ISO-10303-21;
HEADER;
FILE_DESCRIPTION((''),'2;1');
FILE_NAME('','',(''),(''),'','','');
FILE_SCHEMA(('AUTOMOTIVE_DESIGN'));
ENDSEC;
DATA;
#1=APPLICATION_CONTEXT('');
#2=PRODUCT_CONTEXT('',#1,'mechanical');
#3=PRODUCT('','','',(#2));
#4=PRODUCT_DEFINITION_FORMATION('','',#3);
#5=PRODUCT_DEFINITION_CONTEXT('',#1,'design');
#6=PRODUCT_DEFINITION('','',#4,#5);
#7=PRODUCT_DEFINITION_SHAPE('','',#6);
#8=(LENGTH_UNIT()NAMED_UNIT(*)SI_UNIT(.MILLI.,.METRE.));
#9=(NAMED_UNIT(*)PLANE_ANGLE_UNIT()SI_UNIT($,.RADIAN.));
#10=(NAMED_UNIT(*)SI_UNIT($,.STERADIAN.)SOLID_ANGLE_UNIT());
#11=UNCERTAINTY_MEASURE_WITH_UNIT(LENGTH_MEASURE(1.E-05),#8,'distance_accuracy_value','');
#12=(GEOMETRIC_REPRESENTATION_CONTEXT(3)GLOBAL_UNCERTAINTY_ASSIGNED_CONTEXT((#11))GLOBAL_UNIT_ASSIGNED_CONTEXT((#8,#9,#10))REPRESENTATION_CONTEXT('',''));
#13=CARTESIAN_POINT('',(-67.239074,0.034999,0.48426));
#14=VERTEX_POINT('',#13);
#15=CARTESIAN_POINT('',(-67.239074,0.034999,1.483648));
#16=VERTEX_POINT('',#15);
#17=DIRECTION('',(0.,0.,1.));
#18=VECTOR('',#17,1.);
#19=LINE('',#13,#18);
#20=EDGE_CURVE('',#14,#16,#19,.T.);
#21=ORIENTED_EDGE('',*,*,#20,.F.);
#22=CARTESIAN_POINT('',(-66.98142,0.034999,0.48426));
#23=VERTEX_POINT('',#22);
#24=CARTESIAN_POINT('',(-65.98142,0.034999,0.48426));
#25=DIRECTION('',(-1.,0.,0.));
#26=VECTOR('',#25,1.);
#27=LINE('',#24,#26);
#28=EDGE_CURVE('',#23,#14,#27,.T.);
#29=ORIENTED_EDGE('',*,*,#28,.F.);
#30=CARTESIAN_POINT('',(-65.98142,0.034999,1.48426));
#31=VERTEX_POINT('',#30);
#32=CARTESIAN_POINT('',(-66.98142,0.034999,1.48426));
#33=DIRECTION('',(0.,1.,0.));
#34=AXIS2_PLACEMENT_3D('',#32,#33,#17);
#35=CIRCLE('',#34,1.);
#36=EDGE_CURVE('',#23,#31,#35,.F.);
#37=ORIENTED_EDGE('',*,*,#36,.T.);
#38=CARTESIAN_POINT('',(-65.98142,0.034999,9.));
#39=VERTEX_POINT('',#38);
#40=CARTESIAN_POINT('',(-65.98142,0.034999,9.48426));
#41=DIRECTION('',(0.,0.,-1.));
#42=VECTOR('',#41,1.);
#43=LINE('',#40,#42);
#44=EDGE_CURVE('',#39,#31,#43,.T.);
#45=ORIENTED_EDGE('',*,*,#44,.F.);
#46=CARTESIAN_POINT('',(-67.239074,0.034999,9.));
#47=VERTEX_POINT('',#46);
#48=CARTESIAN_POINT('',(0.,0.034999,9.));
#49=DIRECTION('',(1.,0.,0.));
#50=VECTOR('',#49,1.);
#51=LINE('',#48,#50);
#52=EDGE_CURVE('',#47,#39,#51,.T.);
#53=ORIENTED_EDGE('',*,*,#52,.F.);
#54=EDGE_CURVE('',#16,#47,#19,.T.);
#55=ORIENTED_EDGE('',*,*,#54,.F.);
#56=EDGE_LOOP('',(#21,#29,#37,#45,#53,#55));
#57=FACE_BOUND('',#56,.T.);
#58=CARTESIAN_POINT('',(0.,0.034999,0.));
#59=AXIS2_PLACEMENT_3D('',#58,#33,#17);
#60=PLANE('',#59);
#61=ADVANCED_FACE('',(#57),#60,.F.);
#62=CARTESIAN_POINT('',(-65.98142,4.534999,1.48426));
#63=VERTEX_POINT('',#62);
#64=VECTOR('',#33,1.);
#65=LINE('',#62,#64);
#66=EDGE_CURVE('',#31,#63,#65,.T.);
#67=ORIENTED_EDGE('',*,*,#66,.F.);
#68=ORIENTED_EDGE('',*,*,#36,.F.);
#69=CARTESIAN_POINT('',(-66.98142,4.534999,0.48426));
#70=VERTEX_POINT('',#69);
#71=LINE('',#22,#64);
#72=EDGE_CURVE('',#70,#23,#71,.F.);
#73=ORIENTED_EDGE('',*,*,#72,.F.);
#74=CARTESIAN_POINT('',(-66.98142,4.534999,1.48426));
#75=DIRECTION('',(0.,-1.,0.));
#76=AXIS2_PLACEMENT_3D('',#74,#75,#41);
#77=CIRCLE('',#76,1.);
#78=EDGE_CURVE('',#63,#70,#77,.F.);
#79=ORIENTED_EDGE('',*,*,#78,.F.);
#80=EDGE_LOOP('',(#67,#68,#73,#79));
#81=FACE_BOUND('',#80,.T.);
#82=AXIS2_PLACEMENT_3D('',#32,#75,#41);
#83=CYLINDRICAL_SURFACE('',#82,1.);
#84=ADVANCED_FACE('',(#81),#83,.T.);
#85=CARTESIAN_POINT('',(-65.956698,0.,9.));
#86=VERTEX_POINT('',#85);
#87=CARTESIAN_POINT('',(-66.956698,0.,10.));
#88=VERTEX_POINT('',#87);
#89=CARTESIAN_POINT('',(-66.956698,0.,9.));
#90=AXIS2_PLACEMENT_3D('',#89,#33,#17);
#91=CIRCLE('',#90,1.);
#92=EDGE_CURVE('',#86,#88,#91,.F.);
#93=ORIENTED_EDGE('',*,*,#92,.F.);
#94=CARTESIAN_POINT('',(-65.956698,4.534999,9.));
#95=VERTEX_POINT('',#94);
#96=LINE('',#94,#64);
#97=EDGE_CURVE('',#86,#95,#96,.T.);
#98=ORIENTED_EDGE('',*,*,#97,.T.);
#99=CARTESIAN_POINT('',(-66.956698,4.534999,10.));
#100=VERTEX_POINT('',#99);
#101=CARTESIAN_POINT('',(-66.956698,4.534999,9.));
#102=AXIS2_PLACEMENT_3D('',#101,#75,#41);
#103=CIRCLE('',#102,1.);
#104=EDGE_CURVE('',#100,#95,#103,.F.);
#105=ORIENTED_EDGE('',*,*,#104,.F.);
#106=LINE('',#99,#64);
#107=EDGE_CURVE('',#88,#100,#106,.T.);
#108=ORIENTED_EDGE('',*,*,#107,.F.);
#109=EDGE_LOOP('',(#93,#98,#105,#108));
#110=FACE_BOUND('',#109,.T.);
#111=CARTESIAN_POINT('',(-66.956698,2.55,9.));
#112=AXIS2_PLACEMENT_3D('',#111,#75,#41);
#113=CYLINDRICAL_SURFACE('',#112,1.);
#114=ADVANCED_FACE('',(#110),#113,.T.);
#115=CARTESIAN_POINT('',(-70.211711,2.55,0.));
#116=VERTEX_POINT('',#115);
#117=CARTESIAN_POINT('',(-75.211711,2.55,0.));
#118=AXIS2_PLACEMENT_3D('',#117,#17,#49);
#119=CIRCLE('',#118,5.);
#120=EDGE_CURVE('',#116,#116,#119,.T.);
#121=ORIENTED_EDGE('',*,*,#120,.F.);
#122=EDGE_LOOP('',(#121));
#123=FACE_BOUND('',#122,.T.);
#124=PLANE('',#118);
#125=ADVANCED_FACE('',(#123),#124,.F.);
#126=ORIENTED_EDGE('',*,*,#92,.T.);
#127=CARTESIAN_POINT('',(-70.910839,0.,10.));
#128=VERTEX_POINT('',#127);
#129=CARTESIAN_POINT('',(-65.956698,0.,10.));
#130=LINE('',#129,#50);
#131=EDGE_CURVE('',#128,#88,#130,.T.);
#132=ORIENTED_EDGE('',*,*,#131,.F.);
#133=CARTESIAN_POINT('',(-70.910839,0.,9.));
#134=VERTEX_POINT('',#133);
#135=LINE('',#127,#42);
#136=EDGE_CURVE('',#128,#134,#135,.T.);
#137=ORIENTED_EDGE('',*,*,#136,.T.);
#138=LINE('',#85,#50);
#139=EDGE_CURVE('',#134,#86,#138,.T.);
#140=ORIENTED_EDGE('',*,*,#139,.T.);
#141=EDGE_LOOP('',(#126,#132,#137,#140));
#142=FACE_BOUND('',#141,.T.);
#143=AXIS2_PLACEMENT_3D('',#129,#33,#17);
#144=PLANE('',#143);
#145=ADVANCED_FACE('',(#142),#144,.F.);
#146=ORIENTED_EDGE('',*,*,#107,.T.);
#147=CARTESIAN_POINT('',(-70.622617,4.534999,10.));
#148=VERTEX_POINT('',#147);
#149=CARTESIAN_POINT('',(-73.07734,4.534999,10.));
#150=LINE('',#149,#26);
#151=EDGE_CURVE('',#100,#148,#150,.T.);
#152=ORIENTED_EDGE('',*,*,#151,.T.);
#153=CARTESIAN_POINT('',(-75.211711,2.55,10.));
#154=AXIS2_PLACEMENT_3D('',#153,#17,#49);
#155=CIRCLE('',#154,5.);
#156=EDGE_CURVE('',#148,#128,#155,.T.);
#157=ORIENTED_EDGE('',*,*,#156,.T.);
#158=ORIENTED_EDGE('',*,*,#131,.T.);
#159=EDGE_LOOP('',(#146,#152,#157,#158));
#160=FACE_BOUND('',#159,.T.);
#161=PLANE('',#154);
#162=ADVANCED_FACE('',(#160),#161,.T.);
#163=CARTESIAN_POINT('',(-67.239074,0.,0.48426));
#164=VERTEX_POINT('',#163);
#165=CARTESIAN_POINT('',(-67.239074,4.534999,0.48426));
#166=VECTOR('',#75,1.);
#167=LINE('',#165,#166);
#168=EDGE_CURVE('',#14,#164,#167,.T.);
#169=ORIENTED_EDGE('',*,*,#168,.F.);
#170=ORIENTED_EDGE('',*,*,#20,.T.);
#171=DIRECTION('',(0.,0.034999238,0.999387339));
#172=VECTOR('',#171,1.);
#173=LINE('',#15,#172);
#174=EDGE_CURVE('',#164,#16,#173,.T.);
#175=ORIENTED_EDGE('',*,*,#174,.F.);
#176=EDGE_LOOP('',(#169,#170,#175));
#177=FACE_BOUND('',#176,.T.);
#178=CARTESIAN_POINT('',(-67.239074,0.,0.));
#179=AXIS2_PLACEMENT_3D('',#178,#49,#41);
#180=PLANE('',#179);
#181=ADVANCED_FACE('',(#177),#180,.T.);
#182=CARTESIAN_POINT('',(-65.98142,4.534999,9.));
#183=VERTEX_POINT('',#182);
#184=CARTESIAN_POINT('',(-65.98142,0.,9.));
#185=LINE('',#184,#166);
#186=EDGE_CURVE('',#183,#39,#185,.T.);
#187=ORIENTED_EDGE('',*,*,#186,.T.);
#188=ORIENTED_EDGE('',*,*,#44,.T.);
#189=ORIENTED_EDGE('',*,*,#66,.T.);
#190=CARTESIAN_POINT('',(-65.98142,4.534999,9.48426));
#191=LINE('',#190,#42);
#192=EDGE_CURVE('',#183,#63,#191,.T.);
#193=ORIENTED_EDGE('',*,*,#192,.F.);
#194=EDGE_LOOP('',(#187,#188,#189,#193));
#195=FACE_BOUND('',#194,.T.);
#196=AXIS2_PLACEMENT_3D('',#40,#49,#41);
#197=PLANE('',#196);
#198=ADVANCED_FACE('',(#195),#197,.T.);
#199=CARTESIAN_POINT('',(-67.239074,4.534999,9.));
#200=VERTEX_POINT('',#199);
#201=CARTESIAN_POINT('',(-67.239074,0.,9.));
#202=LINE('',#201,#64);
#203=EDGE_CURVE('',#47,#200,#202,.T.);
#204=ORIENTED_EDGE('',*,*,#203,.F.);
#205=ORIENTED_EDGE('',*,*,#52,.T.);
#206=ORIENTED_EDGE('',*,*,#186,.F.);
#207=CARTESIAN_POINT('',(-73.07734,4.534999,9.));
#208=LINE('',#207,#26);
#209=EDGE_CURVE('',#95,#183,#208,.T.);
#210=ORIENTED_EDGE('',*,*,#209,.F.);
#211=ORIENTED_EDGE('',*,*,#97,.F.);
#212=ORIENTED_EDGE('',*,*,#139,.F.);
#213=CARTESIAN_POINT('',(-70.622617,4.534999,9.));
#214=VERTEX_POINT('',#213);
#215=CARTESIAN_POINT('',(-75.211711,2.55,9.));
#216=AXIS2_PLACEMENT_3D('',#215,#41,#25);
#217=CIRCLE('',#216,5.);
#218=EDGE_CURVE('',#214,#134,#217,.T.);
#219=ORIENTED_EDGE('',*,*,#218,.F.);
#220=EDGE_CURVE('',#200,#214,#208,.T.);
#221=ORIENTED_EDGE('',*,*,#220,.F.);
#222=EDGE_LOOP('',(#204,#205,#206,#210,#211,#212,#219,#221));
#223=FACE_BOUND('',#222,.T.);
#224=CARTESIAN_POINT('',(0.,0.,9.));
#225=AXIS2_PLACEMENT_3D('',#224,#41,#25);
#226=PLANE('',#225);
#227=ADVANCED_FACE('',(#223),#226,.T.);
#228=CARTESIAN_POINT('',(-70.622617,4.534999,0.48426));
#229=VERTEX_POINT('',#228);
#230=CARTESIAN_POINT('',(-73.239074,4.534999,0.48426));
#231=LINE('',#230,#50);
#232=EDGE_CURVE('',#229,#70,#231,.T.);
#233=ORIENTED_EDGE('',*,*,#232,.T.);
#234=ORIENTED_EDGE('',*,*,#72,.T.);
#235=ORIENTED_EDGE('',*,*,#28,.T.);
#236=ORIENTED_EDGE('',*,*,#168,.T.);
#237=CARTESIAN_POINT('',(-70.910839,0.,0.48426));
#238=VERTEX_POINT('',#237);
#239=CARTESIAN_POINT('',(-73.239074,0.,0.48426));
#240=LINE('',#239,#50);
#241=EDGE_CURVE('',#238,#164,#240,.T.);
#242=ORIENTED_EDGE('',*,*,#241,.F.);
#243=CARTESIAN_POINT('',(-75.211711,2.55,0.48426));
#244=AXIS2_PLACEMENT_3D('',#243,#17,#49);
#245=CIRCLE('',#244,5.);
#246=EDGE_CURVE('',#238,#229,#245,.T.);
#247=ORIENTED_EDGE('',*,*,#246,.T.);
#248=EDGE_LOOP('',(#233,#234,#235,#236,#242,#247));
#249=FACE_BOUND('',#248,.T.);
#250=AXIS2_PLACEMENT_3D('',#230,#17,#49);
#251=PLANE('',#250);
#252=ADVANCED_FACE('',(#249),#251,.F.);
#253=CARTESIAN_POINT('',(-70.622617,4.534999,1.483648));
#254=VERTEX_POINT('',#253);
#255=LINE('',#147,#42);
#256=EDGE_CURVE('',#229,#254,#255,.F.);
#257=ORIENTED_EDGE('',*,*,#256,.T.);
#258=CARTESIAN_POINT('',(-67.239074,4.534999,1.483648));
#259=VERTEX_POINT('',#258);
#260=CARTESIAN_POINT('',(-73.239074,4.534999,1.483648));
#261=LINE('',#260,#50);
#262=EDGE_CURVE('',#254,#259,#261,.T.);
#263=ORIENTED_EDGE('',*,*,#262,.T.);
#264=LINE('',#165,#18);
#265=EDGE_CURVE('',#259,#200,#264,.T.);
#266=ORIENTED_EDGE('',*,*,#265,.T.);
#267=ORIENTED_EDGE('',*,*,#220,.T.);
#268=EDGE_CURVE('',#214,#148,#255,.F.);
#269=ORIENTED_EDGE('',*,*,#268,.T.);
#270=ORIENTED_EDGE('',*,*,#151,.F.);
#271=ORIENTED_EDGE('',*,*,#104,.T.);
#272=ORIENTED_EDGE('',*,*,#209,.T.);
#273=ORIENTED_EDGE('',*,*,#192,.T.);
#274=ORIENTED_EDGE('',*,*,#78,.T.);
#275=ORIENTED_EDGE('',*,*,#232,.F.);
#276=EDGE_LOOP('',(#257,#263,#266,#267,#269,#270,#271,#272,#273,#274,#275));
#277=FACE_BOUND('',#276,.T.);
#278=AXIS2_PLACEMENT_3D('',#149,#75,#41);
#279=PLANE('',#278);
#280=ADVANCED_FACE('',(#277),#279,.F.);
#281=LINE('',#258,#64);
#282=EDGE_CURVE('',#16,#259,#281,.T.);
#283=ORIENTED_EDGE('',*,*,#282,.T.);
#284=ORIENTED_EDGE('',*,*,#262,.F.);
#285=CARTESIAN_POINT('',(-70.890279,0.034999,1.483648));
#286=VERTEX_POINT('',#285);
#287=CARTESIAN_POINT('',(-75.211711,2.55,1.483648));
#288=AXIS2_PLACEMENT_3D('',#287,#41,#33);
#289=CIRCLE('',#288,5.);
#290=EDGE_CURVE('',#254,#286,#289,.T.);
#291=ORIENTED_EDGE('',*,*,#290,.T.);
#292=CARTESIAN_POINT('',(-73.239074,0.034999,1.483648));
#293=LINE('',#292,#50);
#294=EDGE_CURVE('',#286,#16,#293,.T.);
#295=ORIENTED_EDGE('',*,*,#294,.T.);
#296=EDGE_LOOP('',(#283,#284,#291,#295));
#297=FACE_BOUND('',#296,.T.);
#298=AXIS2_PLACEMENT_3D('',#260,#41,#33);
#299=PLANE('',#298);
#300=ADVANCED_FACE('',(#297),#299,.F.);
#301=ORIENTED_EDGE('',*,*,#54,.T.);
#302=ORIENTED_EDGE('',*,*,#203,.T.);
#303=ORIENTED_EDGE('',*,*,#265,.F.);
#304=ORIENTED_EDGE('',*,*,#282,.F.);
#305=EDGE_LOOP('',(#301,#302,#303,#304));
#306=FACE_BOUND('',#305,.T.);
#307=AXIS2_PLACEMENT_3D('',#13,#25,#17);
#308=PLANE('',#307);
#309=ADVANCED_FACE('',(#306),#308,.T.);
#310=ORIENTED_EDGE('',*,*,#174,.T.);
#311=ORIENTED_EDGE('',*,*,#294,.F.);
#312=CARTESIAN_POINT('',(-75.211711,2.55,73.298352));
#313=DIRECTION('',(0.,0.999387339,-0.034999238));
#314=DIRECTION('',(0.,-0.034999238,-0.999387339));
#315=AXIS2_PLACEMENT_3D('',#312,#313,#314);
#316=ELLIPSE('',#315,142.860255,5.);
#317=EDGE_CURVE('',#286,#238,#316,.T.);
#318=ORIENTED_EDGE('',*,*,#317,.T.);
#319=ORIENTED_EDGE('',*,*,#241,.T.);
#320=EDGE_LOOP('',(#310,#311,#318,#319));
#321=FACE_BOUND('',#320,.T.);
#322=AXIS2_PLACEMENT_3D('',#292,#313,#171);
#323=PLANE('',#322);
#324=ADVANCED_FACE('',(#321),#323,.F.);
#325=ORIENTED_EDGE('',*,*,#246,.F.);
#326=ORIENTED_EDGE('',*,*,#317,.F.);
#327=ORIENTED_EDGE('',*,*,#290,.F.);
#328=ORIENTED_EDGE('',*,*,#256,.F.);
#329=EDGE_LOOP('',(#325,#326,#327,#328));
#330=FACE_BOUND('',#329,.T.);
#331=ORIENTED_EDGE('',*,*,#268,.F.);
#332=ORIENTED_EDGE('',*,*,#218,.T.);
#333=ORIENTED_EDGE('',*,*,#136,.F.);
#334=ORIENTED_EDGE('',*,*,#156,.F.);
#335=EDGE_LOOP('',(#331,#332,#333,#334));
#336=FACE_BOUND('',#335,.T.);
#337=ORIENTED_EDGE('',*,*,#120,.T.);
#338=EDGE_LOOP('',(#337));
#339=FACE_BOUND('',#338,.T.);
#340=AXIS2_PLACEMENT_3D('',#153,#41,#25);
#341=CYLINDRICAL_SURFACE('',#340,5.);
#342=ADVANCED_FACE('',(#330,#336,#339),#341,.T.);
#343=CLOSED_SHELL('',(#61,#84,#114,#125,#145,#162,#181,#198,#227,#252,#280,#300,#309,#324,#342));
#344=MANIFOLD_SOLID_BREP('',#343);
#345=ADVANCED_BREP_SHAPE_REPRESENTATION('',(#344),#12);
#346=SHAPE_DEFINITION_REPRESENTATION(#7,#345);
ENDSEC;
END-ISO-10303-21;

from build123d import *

# Parameters (mm, degrees)
SKETCH_1_R      = 5
EXTRUDE_1_DEPTH = 10
SKETCH_9_W      = 7.120641766
SKETCH_9_H      = 4.534999238
EXTRUDE_6_DEPTH = 1
SKETCH_11_W     = 1.257653538
SKETCH_11_H     = 9
EXTRUDE_7_DEPTH = 4.5
EXTRUDE_8_DEPTH = 6
FILLET_8_R      = 1
FILLET_9_R      = 1


with BuildPart() as part:
    # 草圖1 → 填料-伸長1 (new body)
    with BuildSketch(Plane(origin=(0.382706605, 0, 0), x_dir=(1, 0, 0), z_dir=(0, 0, 1))):
        with Locations((-75.594417438, 2.55)):
            Circle(SKETCH_1_R)
    extrude(amount=EXTRUDE_1_DEPTH)

    # 草圖9 → 填料-伸長6 (add)
    with BuildSketch(Plane(origin=(6.127831546, 0, 9), x_dir=(1, 0, 0), z_dir=(0, 0, 1))):
        with Locations((-75.644850643, 2.267499619)):
            Rectangle(SKETCH_9_W, SKETCH_9_H)
    extrude(amount=EXTRUDE_6_DEPTH)



with BuildPart() as body_2:
    # 草圖11 → 填料-伸長7 (new body)
    with BuildSketch(Plane(origin=(9.574526933, 4.534999238, 0.48426017), x_dir=(1, 0, 0), z_dir=(0, 1, 0))):
        with Locations((-76.184774061, -4.5)):
            Rectangle(SKETCH_11_W, SKETCH_11_H)
    extrude(amount=-EXTRUDE_7_DEPTH)


with BuildPart() as part_1:
    add(part.part)

    add(body_2.part)  # 填料-伸長8 merges body 2
    # 草圖12 → 填料-伸長8 (add)
    with BuildSketch(Plane.ZY.offset(67.239073897)):
        Polygon((0.48426017, 4.534999238), (0.48426017, 0), (1.483647509, 0.034999238), (1.483647509, 4.534999238), align=None)
    extrude(amount=EXTRUDE_8_DEPTH)

    # 圓角8
    fillet_8_edges = [part_1.edges().sort_by_distance(p)[0] for p in [
        (-65.981420359, 2.284999238, 0.48426017),
    ]]
    fillet(fillet_8_edges, radius=FILLET_8_R)

    # 圓角9
    fillet_9_edges = [part_1.edges().sort_by_distance(p)[0] for p in [
        (-65.956698214, 2.267499619, 10),
    ]]
    fillet(fillet_9_edges, radius=FILLET_9_R - 0.0001)  # a hair under: the kernel refuses the full size


solid = part_1.part
